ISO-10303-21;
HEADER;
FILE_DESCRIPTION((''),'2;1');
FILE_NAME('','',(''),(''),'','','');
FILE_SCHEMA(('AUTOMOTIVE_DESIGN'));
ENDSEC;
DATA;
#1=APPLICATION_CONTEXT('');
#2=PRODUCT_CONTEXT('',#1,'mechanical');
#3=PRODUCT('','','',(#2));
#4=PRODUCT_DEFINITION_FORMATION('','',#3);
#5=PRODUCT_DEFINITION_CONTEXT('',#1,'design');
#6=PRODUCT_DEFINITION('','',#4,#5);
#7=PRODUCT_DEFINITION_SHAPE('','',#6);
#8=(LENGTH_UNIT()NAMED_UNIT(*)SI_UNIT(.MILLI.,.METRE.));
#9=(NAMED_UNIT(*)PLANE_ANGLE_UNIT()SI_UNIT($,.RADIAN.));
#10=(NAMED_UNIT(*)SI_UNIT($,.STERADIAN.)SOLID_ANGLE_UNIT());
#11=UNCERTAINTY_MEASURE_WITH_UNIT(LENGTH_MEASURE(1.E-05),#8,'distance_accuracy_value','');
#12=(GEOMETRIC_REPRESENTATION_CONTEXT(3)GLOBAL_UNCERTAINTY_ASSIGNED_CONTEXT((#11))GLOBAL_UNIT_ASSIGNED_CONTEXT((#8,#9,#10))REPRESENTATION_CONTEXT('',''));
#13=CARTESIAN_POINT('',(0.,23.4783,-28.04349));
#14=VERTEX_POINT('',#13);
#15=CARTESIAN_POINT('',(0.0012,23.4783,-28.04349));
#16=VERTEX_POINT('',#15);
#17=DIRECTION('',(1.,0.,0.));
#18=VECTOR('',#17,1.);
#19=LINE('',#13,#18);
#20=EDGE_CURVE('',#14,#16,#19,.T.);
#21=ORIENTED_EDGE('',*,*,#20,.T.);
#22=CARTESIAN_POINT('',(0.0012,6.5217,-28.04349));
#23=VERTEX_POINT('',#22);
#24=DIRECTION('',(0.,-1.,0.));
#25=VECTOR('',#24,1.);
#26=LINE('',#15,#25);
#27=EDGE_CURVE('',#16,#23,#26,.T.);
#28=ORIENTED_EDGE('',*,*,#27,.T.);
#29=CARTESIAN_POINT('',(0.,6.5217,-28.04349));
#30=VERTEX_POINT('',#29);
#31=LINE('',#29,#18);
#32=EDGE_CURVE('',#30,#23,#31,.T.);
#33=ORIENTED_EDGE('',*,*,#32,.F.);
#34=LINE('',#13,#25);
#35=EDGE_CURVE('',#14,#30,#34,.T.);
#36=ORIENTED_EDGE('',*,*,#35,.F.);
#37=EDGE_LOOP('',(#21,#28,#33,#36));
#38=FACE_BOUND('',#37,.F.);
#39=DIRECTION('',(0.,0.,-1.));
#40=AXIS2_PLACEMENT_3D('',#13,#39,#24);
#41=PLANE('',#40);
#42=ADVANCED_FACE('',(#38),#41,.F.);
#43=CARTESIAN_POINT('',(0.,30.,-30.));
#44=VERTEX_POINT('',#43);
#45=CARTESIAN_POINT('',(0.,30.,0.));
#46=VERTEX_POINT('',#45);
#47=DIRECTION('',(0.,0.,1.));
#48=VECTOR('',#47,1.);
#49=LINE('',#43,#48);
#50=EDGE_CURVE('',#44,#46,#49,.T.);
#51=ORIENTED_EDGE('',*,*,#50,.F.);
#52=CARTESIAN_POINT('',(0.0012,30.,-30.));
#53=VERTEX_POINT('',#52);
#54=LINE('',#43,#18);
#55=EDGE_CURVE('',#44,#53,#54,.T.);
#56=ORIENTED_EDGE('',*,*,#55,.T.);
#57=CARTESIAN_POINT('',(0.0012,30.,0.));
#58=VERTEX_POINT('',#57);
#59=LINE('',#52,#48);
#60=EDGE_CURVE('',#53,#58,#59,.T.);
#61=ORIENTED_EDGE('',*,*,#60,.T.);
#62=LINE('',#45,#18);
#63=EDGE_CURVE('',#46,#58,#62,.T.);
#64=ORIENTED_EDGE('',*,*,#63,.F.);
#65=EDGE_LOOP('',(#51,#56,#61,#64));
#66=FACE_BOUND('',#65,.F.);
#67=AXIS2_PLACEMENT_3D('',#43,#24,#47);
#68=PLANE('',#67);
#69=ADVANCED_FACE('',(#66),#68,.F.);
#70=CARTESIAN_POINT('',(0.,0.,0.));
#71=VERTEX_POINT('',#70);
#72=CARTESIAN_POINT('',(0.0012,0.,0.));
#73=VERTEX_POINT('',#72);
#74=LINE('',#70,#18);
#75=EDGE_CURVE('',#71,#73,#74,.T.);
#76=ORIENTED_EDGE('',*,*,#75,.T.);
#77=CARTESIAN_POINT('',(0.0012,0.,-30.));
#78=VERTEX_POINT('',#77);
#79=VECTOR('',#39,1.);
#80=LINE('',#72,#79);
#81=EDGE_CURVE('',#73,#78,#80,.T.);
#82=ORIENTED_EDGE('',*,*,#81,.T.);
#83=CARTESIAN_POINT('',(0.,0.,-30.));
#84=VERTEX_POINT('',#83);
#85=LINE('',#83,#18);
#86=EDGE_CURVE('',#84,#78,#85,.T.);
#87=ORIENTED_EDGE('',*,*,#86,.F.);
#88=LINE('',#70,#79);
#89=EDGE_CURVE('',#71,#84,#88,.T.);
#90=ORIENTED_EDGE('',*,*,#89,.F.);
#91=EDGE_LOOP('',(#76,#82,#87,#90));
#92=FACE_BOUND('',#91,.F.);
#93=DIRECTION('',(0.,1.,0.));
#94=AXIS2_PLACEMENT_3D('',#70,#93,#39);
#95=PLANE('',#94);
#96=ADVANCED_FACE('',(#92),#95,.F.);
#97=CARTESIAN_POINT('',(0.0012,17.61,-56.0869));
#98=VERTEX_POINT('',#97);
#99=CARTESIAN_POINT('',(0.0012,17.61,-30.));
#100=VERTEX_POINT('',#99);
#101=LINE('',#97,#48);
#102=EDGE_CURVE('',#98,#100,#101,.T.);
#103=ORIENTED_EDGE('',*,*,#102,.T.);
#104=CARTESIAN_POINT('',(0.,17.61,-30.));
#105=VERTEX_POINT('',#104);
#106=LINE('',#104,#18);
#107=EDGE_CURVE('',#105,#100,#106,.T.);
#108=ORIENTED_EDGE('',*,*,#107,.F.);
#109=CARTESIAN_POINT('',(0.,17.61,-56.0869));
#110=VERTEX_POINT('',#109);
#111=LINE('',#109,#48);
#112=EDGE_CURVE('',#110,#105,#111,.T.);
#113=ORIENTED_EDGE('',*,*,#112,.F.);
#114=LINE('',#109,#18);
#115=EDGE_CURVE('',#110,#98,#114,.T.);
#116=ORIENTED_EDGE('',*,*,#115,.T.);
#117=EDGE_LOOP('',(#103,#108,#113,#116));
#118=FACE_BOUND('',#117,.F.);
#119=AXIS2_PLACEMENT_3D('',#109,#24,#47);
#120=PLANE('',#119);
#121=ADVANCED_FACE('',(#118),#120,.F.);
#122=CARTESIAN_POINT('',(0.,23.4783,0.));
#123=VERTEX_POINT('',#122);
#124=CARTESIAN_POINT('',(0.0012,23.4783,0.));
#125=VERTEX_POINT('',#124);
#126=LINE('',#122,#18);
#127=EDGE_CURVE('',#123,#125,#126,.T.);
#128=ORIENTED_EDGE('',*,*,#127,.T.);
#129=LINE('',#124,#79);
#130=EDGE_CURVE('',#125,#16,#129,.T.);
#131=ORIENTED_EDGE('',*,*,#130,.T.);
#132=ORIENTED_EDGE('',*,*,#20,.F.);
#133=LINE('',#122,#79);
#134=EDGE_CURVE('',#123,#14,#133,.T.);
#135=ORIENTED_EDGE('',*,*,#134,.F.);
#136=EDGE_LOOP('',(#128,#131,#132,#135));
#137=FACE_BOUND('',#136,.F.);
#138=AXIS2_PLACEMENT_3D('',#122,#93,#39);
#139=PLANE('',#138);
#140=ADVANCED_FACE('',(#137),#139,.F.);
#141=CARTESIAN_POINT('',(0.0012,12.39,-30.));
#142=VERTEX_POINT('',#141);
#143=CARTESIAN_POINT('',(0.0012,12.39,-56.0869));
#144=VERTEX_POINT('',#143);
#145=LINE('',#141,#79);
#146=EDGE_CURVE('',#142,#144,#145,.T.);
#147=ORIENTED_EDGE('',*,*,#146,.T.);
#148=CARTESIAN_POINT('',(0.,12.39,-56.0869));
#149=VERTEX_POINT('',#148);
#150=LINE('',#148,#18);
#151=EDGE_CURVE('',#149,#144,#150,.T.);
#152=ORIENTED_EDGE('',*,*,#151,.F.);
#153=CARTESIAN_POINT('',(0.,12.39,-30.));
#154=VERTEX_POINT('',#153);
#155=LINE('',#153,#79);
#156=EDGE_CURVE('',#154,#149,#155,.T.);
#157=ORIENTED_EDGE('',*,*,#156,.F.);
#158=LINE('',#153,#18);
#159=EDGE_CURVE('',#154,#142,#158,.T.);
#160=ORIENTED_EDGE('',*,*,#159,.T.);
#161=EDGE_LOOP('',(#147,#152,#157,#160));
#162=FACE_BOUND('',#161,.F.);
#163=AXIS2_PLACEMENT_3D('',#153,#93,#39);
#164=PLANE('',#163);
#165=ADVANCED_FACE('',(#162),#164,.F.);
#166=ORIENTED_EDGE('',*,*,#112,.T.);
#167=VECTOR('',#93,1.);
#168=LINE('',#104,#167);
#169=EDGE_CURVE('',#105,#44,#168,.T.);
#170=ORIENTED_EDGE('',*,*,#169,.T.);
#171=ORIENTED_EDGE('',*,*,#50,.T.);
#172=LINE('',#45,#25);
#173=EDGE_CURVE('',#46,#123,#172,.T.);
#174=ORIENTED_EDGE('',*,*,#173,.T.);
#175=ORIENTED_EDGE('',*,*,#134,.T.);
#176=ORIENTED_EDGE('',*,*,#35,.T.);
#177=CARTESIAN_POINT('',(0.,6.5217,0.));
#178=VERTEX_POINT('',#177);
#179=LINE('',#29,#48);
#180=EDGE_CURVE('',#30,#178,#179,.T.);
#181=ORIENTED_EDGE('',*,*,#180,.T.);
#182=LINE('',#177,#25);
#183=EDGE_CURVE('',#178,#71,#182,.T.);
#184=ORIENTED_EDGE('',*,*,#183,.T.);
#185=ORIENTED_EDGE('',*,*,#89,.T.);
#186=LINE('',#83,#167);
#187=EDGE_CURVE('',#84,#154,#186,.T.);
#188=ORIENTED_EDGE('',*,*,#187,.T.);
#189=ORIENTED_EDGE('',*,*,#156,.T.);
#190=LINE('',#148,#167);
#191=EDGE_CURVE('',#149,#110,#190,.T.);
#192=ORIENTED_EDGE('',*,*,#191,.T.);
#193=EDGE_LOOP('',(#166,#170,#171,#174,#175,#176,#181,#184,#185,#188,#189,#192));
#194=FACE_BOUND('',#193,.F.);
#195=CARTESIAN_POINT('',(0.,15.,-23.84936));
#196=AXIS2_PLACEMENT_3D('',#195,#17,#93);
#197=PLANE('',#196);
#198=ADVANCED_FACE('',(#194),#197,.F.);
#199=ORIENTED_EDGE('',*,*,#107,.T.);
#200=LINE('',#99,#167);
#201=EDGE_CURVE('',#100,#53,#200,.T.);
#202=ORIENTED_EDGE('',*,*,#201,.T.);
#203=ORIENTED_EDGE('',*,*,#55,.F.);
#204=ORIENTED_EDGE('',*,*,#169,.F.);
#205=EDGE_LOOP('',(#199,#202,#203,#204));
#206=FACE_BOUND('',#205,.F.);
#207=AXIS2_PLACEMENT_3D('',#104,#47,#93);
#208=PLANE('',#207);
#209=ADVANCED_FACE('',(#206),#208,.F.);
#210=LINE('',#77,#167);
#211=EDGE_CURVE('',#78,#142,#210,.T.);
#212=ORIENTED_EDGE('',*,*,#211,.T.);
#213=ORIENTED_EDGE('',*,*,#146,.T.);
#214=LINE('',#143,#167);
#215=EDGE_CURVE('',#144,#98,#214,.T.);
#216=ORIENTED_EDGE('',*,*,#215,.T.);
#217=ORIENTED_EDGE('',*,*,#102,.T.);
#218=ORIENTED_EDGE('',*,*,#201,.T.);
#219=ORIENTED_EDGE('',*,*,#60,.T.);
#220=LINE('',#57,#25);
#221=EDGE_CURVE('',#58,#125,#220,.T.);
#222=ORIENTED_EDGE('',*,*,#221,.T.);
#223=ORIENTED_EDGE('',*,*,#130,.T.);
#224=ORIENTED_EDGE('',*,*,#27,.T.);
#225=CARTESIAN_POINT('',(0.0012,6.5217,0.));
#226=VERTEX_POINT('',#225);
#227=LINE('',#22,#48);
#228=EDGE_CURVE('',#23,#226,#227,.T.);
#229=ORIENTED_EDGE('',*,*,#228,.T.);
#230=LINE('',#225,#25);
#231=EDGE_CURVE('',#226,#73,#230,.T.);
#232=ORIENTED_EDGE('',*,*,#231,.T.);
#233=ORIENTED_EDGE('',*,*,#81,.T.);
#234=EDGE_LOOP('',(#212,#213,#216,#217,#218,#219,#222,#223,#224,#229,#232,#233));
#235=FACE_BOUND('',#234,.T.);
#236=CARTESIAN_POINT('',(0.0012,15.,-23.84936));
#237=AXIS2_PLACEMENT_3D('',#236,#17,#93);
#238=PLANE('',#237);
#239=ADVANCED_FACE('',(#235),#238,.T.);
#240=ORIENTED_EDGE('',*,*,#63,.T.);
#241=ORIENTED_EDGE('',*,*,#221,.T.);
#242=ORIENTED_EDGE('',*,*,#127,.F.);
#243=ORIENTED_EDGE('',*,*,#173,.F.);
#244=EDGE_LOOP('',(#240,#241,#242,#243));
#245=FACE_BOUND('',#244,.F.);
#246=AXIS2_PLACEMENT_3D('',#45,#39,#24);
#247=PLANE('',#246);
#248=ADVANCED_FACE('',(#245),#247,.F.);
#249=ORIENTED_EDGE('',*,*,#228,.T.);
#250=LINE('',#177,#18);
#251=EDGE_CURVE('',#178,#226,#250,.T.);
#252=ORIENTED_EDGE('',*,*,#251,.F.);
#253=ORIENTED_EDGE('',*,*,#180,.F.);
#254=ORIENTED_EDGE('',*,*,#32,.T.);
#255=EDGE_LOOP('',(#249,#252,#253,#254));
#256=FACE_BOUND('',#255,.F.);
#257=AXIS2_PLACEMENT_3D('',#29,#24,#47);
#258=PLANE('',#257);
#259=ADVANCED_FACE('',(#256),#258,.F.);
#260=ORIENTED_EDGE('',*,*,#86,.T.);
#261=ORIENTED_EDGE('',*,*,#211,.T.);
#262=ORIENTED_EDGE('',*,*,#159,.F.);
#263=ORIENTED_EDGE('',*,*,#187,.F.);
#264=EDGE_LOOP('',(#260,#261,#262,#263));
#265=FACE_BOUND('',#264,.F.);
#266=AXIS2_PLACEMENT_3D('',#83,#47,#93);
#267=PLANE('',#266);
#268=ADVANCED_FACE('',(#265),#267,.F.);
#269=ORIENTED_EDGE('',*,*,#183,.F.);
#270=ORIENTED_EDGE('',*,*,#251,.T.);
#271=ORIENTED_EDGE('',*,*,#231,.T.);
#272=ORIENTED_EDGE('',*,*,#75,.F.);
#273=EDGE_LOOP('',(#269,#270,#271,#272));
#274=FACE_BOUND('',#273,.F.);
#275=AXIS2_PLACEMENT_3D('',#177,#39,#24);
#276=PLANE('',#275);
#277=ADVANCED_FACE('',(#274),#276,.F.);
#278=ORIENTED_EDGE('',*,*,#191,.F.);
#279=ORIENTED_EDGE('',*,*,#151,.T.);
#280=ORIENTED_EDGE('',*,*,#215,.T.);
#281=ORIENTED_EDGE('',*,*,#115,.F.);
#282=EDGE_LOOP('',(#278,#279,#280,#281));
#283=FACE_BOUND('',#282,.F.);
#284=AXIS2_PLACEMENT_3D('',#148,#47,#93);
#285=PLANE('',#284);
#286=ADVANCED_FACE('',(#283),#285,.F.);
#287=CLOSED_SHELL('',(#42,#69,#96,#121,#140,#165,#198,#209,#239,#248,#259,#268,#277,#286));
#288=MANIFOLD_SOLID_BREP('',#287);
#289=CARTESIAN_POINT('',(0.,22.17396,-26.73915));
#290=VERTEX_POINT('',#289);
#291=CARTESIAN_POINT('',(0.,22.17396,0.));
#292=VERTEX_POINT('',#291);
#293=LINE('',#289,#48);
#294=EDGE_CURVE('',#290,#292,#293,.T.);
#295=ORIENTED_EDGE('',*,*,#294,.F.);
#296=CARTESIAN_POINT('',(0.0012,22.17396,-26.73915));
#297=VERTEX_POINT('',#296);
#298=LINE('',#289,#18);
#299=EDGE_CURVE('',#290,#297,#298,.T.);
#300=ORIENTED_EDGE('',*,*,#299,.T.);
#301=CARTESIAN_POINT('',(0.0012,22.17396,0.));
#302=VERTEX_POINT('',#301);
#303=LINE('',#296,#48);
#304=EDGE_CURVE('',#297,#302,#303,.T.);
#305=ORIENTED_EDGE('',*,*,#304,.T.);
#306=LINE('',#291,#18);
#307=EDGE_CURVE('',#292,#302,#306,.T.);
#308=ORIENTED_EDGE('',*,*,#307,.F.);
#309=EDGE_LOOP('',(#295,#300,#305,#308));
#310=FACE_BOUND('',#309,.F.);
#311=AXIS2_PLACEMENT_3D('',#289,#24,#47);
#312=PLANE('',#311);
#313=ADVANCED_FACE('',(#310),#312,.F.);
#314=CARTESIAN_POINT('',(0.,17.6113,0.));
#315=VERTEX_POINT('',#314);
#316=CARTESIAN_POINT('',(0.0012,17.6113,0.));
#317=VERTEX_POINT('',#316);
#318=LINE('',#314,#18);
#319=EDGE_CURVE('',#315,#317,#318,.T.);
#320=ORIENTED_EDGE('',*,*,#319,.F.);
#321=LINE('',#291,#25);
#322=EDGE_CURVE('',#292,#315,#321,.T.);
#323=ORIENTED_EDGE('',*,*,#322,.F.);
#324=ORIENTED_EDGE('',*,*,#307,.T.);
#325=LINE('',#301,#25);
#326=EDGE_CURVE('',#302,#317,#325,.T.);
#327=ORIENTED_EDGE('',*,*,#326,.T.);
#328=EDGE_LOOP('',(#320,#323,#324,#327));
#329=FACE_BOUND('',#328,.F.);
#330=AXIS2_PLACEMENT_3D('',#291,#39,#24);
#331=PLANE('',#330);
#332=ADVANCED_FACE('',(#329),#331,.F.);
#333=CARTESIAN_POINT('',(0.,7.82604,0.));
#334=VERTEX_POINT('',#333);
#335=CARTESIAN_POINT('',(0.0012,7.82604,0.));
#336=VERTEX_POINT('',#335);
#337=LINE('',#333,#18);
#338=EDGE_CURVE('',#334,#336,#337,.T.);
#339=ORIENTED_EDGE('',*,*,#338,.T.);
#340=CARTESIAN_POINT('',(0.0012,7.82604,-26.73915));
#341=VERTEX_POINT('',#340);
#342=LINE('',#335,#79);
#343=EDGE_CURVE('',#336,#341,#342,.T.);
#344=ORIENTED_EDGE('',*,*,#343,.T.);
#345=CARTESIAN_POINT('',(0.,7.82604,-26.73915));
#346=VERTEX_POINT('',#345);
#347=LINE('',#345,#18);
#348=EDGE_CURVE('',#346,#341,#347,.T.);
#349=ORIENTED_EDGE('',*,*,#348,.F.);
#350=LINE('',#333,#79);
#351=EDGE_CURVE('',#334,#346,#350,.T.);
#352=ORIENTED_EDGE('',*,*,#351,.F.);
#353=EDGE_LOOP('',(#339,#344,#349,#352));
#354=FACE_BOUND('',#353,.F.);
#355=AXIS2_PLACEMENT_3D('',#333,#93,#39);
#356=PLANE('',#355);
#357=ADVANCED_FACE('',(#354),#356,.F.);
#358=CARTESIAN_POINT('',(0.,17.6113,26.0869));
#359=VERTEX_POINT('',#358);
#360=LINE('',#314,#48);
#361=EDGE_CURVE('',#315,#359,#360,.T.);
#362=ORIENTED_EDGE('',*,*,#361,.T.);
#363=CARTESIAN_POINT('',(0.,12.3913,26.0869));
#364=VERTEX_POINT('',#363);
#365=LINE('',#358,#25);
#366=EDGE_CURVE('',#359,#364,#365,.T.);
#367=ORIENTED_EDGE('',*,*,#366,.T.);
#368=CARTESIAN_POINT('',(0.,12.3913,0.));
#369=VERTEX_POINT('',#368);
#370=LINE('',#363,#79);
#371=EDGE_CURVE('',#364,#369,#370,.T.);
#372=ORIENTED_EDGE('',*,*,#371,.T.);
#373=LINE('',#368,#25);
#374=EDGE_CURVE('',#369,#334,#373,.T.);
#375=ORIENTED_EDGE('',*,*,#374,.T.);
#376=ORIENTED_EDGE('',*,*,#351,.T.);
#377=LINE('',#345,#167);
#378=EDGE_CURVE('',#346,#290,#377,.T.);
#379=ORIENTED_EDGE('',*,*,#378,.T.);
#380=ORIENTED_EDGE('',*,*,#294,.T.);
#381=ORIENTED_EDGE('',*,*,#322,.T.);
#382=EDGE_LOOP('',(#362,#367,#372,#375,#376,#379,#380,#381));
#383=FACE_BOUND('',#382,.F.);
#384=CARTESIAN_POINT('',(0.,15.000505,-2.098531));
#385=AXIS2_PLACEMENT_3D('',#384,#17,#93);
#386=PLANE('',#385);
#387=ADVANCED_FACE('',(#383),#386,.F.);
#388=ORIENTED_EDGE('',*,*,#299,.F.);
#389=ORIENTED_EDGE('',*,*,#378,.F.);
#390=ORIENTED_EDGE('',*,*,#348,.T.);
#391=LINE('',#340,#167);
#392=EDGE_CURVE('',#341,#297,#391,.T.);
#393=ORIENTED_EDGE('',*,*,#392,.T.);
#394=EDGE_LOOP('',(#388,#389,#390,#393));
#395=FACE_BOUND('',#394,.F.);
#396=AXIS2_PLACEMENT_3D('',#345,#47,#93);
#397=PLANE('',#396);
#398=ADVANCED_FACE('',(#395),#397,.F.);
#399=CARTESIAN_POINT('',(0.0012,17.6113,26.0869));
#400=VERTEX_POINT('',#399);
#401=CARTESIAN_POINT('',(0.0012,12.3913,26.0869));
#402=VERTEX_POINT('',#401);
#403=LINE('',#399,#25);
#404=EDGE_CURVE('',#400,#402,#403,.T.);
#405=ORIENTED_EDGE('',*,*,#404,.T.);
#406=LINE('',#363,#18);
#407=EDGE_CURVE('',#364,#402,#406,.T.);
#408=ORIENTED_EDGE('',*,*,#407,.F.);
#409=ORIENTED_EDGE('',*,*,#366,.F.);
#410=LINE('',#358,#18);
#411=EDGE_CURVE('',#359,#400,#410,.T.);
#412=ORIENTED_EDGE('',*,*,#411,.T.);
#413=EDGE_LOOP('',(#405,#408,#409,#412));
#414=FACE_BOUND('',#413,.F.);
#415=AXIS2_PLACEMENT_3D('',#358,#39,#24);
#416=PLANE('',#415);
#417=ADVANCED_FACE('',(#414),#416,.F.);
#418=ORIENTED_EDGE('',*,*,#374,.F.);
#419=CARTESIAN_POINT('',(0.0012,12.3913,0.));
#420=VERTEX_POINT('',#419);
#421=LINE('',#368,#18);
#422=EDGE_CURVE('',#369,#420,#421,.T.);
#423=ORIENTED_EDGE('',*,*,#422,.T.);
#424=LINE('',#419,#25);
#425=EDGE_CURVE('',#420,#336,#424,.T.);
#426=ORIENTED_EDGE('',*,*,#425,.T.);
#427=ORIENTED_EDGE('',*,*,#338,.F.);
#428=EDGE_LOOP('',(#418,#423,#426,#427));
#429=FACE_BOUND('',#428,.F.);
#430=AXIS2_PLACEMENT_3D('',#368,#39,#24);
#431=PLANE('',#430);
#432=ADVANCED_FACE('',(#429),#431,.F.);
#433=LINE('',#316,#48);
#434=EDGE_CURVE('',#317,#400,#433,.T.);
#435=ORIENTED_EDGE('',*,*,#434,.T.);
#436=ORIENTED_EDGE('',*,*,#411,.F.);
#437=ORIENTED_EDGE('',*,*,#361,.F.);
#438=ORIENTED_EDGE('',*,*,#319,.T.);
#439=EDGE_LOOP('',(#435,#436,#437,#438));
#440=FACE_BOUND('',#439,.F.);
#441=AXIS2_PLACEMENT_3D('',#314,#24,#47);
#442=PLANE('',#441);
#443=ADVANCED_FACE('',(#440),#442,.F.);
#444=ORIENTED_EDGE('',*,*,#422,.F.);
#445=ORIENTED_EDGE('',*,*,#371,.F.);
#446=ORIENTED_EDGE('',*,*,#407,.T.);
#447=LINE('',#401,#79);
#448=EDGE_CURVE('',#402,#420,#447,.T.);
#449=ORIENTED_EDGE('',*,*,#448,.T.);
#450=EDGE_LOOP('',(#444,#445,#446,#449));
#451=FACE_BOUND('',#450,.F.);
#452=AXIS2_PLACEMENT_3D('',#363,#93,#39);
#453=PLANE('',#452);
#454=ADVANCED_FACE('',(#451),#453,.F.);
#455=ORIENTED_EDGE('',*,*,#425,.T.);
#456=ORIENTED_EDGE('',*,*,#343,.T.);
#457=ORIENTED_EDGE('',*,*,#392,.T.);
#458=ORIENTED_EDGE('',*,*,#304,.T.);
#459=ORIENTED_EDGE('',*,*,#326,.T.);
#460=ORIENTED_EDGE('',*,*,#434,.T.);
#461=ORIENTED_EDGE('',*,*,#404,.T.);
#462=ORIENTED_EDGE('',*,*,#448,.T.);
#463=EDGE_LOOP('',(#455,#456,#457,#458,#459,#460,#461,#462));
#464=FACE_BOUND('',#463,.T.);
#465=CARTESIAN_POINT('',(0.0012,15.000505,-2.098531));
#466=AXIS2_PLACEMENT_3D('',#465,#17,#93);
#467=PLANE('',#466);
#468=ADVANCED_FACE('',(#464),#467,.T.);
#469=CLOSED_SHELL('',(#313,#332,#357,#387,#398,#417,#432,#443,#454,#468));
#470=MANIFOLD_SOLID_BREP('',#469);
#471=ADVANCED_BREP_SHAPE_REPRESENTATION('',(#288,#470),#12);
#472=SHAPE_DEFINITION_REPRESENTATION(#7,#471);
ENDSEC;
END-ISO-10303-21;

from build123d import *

# Parameters (mm, degrees)
F1_DEPTH = 0.0012


# Not quite as in the source:
# - a feature names something its author has since deleted; it is built from what else it names


with BuildPart() as f1:
    # F0 (on Right) → F1 (new body)
    with BuildSketch(Plane.YZ):
        Polygon((6.5217, 0), (0, 0), (0, -30), (12, -30), (12.39, -30), (12.39, -51.0653850647), (12.39, -56.0869), (17.61, -56.0869), (17.61, -30), (30, -30), (30, 0), (23.4783, 0), (23.4783, -28.04349), (7.82604, -28.04349), (6.5217, -28.04349), align=None)
    extrude(amount=F1_DEPTH)


with BuildPart() as f1b:
    # F0 (on Right) → F1, piece 2 (new body)
    with BuildSketch(Plane.YZ):
        Polygon((12.3913, 0), (11.4456, 0), (9, 0), (7.82604, 0), (7.82604, -26.73915), (22.17396, -26.73915), (22.17396, 0), (17.6113, 0), (17.6113, 26.0869), (12.3913, 26.0869), align=None)
    extrude(amount=F1_DEPTH)


solid = Compound([f1.part, f1b.part])
